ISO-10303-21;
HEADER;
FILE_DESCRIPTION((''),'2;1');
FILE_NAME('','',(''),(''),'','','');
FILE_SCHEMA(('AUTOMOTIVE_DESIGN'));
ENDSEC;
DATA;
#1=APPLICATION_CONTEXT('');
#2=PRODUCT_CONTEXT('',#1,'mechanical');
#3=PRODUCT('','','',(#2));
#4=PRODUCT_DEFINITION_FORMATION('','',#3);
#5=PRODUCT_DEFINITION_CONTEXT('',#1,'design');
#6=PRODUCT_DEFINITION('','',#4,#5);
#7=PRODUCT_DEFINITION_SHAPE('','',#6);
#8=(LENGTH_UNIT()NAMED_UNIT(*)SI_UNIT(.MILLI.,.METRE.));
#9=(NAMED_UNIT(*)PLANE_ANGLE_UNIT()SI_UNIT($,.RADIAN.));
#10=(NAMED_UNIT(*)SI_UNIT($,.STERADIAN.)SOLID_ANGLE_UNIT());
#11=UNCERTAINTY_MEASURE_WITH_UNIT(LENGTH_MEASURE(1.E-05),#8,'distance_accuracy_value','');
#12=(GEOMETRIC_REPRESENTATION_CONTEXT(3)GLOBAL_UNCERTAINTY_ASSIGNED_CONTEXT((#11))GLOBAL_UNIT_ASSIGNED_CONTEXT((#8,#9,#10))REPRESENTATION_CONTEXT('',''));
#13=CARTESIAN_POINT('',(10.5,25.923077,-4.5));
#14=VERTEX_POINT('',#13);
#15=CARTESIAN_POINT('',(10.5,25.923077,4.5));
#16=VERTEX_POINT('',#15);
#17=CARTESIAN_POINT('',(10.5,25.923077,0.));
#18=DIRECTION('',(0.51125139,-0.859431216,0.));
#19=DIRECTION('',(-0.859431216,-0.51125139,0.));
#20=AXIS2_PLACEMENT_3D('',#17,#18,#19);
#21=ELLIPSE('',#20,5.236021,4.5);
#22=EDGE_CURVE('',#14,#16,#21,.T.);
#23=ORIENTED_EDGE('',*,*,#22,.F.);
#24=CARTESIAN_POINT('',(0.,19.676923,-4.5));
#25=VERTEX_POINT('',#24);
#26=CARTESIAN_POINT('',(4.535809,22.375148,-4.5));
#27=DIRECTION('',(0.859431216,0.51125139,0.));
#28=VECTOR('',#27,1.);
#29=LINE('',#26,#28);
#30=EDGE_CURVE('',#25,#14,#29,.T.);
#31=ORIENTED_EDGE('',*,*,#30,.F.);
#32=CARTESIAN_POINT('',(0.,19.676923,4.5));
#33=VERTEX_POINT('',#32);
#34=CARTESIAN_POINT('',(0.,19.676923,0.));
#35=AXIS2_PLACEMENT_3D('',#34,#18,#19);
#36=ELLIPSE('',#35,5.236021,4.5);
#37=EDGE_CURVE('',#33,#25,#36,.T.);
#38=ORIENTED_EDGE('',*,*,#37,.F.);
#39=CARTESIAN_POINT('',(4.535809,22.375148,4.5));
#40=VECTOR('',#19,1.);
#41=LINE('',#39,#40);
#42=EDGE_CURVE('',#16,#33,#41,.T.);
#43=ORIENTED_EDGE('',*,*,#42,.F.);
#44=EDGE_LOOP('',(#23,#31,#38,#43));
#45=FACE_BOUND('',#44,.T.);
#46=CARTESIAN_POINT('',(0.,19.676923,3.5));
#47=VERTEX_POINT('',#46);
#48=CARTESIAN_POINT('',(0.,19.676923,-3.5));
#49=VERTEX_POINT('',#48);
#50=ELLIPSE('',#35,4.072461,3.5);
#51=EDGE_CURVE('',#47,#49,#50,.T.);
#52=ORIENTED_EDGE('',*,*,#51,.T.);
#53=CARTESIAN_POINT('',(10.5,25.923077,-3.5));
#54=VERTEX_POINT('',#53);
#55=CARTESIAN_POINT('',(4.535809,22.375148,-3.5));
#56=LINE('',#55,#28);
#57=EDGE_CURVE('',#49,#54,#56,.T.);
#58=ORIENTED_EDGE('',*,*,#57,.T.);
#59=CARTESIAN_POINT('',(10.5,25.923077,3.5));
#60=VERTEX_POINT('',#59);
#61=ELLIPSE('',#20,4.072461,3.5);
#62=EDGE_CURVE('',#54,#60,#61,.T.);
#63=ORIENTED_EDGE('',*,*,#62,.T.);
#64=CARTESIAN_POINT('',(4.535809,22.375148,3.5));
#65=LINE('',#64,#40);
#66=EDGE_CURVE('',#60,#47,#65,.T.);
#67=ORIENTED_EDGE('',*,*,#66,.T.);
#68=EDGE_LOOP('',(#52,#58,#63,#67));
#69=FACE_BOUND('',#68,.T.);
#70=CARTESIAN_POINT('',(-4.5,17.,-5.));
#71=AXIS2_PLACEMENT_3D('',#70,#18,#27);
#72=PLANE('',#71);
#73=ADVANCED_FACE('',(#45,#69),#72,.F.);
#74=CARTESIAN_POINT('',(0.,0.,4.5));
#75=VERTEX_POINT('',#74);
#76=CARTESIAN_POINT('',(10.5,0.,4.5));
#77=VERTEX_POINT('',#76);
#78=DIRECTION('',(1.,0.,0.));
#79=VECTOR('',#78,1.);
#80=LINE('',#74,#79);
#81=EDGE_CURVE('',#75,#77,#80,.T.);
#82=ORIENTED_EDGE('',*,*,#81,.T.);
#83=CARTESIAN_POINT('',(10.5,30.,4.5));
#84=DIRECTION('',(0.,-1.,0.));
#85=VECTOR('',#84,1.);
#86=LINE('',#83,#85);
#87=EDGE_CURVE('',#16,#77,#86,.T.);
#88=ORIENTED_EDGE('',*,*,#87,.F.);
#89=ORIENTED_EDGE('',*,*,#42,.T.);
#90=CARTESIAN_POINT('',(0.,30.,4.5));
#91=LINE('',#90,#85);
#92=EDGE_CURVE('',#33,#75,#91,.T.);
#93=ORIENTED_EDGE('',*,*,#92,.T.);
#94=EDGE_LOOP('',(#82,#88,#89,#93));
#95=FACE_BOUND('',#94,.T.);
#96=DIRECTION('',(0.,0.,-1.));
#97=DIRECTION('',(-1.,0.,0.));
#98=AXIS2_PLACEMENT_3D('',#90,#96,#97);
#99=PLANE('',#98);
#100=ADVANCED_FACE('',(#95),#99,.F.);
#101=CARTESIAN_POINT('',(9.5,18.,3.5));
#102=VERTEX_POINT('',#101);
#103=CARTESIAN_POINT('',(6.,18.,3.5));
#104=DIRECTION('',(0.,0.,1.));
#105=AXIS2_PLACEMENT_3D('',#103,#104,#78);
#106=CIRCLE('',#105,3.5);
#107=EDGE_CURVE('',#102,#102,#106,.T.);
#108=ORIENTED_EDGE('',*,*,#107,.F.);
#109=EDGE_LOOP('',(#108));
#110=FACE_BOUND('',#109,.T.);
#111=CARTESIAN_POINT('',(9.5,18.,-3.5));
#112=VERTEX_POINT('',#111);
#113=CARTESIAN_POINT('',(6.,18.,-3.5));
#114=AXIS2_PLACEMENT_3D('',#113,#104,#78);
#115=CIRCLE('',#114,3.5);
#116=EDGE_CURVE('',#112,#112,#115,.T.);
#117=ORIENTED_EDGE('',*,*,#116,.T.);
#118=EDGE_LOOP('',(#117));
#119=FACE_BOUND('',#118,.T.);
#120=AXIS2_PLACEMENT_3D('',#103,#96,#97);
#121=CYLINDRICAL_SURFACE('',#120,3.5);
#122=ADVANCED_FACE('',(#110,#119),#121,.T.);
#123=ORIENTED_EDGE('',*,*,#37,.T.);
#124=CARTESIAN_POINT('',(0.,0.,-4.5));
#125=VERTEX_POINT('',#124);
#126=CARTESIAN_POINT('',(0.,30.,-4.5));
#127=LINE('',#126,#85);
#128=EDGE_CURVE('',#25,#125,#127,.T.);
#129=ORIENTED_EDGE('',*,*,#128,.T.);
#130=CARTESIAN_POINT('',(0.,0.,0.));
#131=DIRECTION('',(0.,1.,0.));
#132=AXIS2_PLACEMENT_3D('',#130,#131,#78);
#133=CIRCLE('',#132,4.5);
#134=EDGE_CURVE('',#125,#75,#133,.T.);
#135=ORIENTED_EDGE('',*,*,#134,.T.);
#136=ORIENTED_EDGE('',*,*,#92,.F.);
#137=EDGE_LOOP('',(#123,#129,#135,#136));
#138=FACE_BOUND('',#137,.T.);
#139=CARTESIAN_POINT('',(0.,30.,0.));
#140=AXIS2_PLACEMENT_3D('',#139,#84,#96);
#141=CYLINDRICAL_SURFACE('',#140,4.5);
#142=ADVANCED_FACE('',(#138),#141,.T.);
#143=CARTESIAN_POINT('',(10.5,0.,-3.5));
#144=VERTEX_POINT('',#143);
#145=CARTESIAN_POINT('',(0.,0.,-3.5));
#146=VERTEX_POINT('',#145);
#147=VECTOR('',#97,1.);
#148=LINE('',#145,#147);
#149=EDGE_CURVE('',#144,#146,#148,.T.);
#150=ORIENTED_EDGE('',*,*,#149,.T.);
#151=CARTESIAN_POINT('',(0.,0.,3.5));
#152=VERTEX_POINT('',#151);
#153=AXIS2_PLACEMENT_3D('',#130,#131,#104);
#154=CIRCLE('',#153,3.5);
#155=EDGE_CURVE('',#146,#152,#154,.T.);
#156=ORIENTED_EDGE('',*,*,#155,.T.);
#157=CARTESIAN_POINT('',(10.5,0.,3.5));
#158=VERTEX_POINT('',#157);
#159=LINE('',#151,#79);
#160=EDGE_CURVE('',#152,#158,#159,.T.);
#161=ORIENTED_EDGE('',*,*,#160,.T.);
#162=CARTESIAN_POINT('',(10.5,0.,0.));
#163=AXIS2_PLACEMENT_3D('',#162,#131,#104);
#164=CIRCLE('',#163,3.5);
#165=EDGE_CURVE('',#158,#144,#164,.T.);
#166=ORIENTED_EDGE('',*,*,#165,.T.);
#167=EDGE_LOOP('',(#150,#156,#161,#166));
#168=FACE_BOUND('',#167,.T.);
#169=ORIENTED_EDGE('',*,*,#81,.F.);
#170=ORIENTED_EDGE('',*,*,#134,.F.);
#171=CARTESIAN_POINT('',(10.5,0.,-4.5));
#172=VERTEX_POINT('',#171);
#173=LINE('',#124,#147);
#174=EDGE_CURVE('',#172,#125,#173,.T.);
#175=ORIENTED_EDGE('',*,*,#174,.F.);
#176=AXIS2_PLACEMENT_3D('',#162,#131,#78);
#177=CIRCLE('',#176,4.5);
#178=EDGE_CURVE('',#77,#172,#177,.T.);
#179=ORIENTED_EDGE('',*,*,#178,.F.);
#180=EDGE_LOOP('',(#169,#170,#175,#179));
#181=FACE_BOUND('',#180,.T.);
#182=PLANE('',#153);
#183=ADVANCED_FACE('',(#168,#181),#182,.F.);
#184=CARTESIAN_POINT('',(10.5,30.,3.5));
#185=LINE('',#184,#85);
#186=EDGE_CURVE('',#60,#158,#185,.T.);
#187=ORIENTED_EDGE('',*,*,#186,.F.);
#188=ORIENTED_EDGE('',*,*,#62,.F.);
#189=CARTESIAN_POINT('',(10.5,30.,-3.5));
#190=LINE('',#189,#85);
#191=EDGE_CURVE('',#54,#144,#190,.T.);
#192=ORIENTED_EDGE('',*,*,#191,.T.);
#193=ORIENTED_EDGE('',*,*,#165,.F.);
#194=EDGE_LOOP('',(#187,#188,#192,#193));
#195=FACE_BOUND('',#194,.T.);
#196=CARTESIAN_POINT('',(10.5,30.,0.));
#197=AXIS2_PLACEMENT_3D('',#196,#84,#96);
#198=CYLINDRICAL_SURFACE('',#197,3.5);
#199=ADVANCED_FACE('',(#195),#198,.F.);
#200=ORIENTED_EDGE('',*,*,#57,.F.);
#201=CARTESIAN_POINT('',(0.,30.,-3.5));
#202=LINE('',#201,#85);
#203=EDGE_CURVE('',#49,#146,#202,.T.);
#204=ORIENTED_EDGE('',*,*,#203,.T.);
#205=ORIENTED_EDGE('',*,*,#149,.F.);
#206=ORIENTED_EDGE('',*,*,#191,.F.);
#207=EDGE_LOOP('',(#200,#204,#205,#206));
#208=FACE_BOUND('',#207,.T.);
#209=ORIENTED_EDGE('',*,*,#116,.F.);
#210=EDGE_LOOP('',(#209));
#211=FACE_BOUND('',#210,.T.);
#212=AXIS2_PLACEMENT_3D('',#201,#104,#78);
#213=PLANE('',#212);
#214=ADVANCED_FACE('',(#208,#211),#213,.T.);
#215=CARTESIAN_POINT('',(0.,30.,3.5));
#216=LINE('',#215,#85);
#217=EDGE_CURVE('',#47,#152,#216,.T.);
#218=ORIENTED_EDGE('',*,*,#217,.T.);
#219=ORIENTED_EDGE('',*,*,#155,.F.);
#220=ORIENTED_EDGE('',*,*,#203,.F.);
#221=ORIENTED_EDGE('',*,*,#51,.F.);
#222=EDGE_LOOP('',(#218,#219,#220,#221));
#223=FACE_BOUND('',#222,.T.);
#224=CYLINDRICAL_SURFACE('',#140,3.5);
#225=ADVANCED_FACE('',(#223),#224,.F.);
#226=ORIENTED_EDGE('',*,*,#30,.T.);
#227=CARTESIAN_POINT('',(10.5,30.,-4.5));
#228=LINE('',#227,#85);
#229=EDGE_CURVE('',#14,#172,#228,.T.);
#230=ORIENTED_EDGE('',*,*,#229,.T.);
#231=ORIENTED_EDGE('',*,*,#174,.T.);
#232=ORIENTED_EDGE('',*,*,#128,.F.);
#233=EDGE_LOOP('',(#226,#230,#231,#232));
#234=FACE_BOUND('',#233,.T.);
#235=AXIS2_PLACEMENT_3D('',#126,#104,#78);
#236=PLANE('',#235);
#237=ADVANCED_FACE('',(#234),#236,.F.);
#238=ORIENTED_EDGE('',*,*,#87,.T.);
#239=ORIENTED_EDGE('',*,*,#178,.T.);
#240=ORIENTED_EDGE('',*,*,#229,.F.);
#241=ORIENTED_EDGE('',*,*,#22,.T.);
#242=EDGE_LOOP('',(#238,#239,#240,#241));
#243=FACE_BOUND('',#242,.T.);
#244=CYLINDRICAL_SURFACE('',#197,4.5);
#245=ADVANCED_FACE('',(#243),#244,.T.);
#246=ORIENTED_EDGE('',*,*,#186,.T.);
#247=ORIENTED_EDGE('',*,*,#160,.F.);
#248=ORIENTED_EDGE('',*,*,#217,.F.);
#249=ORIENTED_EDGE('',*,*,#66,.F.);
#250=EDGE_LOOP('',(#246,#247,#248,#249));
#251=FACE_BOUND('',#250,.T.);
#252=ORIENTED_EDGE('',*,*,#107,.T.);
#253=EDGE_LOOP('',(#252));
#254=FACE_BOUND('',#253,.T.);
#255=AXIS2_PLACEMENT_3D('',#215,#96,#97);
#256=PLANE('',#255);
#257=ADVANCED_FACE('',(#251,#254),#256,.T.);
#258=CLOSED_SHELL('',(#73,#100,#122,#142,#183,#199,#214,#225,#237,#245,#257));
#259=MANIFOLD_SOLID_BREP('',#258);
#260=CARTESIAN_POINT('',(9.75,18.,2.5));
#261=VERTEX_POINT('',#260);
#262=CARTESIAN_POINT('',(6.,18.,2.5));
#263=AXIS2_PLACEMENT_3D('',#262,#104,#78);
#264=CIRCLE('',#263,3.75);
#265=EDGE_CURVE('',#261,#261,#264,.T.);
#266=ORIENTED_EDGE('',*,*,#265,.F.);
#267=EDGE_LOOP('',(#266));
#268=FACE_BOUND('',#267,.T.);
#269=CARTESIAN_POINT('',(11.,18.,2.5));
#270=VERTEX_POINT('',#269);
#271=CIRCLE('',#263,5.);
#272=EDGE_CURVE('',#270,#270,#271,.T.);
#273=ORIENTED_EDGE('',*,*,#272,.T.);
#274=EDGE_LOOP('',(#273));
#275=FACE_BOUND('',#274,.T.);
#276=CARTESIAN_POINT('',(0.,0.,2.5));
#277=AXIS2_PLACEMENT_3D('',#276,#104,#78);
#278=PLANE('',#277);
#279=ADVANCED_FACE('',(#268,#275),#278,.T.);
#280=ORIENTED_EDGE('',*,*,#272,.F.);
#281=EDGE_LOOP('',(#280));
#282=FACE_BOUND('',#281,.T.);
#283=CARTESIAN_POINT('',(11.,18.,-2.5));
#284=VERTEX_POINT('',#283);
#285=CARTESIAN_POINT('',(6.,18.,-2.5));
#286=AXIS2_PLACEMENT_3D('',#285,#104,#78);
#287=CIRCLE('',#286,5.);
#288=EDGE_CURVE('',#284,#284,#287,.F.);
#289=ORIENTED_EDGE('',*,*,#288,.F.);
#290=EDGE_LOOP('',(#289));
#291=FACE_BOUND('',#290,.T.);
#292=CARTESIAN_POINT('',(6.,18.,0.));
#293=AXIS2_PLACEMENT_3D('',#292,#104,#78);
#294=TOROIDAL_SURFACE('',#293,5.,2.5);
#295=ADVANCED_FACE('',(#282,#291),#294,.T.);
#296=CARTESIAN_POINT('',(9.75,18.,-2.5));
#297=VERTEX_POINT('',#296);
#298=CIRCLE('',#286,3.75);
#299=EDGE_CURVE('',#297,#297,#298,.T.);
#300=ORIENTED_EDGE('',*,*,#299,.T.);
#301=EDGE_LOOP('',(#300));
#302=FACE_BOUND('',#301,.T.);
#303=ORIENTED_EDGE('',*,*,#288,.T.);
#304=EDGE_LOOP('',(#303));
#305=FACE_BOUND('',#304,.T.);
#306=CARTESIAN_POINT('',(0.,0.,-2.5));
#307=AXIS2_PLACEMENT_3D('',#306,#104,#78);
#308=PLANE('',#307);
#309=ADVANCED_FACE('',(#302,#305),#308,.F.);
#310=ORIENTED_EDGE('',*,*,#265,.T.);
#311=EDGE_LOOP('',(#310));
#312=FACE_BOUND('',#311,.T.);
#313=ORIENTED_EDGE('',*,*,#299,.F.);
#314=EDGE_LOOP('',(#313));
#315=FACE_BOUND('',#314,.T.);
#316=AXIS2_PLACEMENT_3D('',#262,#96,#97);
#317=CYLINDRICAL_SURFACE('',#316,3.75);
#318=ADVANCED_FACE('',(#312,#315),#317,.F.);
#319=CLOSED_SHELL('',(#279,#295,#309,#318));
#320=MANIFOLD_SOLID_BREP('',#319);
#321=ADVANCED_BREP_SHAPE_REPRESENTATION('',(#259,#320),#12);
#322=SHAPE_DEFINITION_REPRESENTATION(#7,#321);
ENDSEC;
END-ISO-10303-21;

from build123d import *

# Parameters (mm, degrees)
EXTRUDE_1_DEPTH     = 30
CUT_EXTRUDE_1_DEPTH = 5
SKETCH_3_R          = 3.5
EXTRUDE_1_2_DEPTH   = 3.5
SKETCH_4_R          = 7.5
SKETCH_4_R_2        = 3.75
EXTRUDE_2_DEPTH     = 2.5
FILLET_2_R          = 2.5


with BuildPart() as part:
    # 草图1 → Extrude 1 (new body)
    with BuildSketch(Plane(origin=(0, 0, 0), x_dir=(1, 0, 0), z_dir=(0, 1, 0))):
        with BuildLine():
            Line((10.5, -4.5), (0, -4.5))
            ThreePointArc((0, -4.5), (-4.5, 0), (0, 4.5))
            Line((0, 4.5), (10.5, 4.5))
            ThreePointArc((10.5, 4.5), (15, 0), (10.5, -4.5))
        make_face()
        with BuildLine():
            Line((10.5, -3.5), (0, -3.5))
            ThreePointArc((0, -3.5), (-3.5, 0), (0, 3.5))
            Line((0, 3.5), (10.5, 3.5))
            ThreePointArc((10.5, 3.5), (14, 0), (10.5, -3.5))
        make_face(mode=Mode.SUBTRACT)
    extrude(amount=EXTRUDE_1_DEPTH)

    # 草图2 → 切除-拉伸1 (cut, symmetric)
    with BuildSketch(Plane.XY):
        Polygon((-4.5, 17), (15, 28.6), (15, 30), (-4.5, 30), align=None)
    extrude(amount=CUT_EXTRUDE_1_DEPTH, both=True, mode=Mode.SUBTRACT)

    # 草图3 → Extrude 1 2 (add, symmetric)
    with BuildSketch(Plane.XY):
        with Locations((6, 18)):
            Circle(SKETCH_3_R)
    extrude(amount=EXTRUDE_1_2_DEPTH, both=True)


with BuildPart() as body_2:
    # 草图4 → 凸台-拉伸2 (new, symmetric)
    with BuildSketch(Plane.XY):
        with Locations((6, 18)):
            Circle(SKETCH_4_R)
        with Locations((6, 18)):
            Circle(SKETCH_4_R_2, mode=Mode.SUBTRACT)
    extrude(amount=EXTRUDE_2_DEPTH, both=True)

    # 圆角2
    fillet_2_edges = [body_2.edges().sort_by_distance(p)[0] for p in [
        (-1.5, 18, 2.5),
        (-1.5, 18, -2.5),
    ]]
    fillet(fillet_2_edges, radius=FILLET_2_R - 0.0001)  # a hair under: the kernel refuses the full size


solid = Compound([part.part, body_2.part])
